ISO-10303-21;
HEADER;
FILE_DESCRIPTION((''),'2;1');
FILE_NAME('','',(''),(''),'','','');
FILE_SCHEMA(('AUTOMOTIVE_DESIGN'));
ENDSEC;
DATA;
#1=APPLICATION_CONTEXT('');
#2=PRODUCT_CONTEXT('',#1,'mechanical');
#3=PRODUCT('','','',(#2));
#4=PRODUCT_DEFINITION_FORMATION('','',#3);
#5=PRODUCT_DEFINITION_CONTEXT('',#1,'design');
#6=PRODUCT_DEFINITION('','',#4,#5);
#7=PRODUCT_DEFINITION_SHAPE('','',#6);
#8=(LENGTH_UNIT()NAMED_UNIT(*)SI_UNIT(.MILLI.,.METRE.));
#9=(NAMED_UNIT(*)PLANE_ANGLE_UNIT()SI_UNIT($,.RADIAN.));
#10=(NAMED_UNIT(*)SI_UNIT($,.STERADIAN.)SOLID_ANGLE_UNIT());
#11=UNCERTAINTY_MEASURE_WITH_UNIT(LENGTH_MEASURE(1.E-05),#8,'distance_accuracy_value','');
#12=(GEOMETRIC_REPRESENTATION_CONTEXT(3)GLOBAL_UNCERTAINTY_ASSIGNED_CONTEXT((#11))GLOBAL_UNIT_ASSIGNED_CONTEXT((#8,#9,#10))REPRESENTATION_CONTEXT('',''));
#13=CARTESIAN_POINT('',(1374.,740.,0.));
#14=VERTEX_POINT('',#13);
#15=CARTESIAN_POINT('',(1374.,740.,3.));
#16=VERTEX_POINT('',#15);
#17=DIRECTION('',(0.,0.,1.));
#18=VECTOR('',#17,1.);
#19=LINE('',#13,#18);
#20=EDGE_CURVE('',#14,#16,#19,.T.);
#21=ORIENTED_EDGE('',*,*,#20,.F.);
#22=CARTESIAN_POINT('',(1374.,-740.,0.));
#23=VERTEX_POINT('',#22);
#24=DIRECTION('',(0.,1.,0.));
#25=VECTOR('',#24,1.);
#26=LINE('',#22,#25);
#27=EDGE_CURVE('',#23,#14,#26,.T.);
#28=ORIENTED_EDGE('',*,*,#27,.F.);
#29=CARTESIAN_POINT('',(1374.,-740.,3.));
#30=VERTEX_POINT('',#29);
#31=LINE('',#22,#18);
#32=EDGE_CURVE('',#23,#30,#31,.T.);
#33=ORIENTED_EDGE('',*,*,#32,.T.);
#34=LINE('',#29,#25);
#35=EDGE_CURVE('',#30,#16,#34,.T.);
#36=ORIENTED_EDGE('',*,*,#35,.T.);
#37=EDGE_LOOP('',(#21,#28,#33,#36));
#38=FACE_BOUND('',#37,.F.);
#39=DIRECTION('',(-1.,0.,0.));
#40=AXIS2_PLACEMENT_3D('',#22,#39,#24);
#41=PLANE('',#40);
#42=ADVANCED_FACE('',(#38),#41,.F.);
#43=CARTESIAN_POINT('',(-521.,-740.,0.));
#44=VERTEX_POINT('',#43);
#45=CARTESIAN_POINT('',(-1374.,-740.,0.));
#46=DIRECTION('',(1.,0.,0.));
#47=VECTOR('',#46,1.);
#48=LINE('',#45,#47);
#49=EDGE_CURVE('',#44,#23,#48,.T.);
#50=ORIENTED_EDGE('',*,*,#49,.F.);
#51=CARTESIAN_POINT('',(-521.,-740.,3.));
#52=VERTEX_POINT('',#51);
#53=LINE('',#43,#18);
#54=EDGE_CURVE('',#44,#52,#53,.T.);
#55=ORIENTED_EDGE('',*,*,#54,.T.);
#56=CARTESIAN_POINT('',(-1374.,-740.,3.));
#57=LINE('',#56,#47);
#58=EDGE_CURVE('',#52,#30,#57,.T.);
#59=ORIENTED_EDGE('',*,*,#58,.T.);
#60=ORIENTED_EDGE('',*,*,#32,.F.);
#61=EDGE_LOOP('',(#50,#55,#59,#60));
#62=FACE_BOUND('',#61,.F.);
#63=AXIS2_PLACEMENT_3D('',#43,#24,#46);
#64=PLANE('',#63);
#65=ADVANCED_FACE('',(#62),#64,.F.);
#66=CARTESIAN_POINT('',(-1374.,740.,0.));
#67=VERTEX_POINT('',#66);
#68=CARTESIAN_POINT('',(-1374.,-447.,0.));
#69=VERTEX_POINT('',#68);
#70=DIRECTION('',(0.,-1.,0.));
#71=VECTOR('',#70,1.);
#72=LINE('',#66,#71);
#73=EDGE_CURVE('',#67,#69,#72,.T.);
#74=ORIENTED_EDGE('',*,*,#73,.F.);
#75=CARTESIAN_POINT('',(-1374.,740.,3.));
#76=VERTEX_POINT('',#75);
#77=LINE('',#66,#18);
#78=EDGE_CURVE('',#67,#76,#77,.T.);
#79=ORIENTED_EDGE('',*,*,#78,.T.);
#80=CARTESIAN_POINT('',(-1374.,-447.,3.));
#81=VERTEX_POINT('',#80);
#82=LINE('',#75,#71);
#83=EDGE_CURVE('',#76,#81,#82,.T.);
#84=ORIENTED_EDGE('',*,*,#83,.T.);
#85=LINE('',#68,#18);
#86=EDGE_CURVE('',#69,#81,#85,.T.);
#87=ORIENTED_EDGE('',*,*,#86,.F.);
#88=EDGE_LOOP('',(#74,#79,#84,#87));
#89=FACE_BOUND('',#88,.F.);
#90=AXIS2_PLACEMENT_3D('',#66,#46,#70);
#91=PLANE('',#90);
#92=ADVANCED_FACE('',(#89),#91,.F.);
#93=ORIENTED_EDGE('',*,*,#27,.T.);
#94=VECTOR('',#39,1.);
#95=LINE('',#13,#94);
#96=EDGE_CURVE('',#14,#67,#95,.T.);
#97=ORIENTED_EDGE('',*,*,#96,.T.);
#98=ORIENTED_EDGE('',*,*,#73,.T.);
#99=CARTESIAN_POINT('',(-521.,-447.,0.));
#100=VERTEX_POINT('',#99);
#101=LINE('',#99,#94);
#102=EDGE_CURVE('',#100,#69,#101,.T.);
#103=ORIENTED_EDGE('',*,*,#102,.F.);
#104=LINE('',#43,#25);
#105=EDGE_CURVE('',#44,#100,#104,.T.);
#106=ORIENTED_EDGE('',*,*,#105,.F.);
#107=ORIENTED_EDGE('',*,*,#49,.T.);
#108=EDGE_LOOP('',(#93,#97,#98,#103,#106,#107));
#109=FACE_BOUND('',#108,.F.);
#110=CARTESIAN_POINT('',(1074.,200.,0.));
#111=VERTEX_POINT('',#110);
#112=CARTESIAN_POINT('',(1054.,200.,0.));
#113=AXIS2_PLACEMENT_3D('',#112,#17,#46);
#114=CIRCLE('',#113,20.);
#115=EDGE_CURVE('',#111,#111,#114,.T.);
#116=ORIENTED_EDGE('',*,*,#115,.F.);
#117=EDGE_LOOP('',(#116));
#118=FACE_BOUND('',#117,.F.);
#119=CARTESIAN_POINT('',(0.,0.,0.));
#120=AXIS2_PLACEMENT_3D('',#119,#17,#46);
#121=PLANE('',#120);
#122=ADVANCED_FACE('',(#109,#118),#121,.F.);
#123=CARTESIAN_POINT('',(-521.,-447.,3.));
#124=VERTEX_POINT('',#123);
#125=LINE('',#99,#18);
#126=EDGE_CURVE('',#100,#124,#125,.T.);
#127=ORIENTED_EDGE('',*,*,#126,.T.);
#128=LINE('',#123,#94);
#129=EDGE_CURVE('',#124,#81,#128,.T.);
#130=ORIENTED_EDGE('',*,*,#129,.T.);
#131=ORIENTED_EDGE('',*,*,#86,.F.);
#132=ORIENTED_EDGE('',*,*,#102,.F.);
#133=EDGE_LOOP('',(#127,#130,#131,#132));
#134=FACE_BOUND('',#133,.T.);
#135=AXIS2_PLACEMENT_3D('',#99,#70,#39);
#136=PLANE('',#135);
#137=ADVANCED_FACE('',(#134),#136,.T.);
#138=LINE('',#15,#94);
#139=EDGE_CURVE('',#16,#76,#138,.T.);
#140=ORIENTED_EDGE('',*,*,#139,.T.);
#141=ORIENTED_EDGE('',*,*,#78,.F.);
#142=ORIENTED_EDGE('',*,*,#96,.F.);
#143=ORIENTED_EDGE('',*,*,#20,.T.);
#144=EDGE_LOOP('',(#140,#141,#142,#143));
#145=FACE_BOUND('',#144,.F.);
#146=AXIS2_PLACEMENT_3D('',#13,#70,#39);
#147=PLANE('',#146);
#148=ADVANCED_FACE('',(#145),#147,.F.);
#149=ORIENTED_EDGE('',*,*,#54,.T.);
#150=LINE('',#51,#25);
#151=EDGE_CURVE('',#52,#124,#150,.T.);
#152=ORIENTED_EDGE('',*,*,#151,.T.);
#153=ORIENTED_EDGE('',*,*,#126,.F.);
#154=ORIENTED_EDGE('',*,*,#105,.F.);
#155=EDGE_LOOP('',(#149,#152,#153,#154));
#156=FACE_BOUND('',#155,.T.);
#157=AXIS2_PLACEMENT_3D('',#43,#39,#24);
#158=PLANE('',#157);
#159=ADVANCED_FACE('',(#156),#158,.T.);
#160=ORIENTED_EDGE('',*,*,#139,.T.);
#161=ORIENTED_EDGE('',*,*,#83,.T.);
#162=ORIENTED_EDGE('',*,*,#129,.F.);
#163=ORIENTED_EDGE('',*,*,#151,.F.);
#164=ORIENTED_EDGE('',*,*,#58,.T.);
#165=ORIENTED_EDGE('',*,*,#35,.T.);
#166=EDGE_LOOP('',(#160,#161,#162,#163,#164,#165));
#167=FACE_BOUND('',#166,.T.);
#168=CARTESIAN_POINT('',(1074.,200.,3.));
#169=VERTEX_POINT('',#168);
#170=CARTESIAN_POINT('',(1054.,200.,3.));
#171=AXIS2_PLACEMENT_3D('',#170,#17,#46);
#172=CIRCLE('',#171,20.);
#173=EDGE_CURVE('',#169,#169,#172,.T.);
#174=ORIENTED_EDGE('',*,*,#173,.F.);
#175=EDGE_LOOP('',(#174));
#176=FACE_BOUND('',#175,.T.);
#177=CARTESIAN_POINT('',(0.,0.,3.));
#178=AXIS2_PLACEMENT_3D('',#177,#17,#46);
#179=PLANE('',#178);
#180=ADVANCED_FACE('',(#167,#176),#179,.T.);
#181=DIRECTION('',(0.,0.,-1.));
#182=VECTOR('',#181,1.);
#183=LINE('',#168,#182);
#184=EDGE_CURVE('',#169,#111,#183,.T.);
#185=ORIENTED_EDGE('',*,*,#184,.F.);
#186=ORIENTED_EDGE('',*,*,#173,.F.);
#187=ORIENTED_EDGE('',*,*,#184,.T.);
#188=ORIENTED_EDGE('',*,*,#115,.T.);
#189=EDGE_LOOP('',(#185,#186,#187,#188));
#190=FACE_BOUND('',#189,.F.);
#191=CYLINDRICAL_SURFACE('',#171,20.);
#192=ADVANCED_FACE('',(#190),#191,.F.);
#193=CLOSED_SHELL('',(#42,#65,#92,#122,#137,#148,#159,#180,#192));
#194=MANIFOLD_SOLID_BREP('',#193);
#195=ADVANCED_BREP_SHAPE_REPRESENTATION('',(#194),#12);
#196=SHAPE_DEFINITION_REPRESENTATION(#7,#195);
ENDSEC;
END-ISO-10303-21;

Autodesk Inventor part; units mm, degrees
ref_plane "YZ Plane" through (0, 0, 0) normal (1, 0, 0) x (0, 1, 0)
ref_plane "XZ Plane" through (0, 0, 0) normal (0, 1, 0) x (-1, 0, 0)
ref_plane "XY Plane" through (0, 0, 0) normal (0, 0, 1) x (1, 0, 0)
sketch "Sketch1" plane through (0, 0, 0) normal (0, 0, 1) x (1, 0, 0)
  line L0 (-1374, -740) -> (1374, -740)
  line L1 (1374, -740) -> (1374, 740)
  line L2 (1374, 740) -> (-1374, 740)
  line L3 (-1374, 740) -> (-1374, -740)
  line L4 (-1374, -740) -> (1374, 740) construction
  line L5 (1374, -740) -> (-1374, 740) construction
  line L6 (-1374, -740) -> (-521, -740)
  line L7 (-521, -740) -> (-521, -447)
  line L8 (-521, -447) -> (-1374, -447)
  line L9 (-1374, -447) -> (-1374, -740)
  point P0 (0, 0)
  point P1 (-1374, -593.5)
  point P2 (-521, -740)
  dimension "d0" = 2748
  dimension "d1" = 1480
  dimension "d30" = 293
  dimension "d31" = 853
extrude "Plate1" add sketch "Sketch1" along normal blind 3 contours L7 L8 L3 L2 L1 L0
sketch "Sketch5" plane through (0, 0, 3) normal (0, 0, 1) x (1, 0, 0)
  line L0 (1349, 715) -> (1349, 515) construction
  line L1 (1349, 515) -> (1334, 515) construction
  line L2 (1334, 515) -> (1334, 715) construction
  line L3 (1334, 715) -> (1349, 715) construction
  line L4 (1374, 740) -> (1374, -740) projected
  line L5 (-1374, 740) -> (1374, 740) projected
  point P0 (0, 0)
  dimension "d26" = 200
  dimension "d27" = 15
  dimension "d28" = 25
  dimension "d29" = 25
mark "Mark1"
sketch "Sketch6" plane through (-1374, 740, 3) normal (0, 0, 1) x (1, 0, 0)
  circle A0 centre (2428, -540) radius 20
  line L0 (2748, 0) -> (2748, -1480) projected
  line L1 (0, 0) -> (2748, 0) projected
  point P0 (1374, -740)
  dimension "d32" = 40
  dimension "d33" = 320
  dimension "d34" = 540
extrude "Extrusion2" cut sketch "Sketch6" against normal up to surface (3 mm away)
equation "\"d2\" = Thickness"
equation "\"BendReliefWidth\" = Thickness"
equation "\"BendReliefDepth\" = 0.5 * Thickness"
equation "\"CornerReliefSize\" = 4 * Thickness"
equation "\"MinimumRemnant\" = 2 * Thickness"
equation "\"TransitionRadius\" = BendRadius"
equation "\"JacobiRadiusSize\" = BendRadius"
equation "\"GapSize\" = Thickness"
equation "\"Thickness\" = 3"
equation "\"BendRadius\" = 5"
properties part number "BSH 035 board" material "09g2s"
